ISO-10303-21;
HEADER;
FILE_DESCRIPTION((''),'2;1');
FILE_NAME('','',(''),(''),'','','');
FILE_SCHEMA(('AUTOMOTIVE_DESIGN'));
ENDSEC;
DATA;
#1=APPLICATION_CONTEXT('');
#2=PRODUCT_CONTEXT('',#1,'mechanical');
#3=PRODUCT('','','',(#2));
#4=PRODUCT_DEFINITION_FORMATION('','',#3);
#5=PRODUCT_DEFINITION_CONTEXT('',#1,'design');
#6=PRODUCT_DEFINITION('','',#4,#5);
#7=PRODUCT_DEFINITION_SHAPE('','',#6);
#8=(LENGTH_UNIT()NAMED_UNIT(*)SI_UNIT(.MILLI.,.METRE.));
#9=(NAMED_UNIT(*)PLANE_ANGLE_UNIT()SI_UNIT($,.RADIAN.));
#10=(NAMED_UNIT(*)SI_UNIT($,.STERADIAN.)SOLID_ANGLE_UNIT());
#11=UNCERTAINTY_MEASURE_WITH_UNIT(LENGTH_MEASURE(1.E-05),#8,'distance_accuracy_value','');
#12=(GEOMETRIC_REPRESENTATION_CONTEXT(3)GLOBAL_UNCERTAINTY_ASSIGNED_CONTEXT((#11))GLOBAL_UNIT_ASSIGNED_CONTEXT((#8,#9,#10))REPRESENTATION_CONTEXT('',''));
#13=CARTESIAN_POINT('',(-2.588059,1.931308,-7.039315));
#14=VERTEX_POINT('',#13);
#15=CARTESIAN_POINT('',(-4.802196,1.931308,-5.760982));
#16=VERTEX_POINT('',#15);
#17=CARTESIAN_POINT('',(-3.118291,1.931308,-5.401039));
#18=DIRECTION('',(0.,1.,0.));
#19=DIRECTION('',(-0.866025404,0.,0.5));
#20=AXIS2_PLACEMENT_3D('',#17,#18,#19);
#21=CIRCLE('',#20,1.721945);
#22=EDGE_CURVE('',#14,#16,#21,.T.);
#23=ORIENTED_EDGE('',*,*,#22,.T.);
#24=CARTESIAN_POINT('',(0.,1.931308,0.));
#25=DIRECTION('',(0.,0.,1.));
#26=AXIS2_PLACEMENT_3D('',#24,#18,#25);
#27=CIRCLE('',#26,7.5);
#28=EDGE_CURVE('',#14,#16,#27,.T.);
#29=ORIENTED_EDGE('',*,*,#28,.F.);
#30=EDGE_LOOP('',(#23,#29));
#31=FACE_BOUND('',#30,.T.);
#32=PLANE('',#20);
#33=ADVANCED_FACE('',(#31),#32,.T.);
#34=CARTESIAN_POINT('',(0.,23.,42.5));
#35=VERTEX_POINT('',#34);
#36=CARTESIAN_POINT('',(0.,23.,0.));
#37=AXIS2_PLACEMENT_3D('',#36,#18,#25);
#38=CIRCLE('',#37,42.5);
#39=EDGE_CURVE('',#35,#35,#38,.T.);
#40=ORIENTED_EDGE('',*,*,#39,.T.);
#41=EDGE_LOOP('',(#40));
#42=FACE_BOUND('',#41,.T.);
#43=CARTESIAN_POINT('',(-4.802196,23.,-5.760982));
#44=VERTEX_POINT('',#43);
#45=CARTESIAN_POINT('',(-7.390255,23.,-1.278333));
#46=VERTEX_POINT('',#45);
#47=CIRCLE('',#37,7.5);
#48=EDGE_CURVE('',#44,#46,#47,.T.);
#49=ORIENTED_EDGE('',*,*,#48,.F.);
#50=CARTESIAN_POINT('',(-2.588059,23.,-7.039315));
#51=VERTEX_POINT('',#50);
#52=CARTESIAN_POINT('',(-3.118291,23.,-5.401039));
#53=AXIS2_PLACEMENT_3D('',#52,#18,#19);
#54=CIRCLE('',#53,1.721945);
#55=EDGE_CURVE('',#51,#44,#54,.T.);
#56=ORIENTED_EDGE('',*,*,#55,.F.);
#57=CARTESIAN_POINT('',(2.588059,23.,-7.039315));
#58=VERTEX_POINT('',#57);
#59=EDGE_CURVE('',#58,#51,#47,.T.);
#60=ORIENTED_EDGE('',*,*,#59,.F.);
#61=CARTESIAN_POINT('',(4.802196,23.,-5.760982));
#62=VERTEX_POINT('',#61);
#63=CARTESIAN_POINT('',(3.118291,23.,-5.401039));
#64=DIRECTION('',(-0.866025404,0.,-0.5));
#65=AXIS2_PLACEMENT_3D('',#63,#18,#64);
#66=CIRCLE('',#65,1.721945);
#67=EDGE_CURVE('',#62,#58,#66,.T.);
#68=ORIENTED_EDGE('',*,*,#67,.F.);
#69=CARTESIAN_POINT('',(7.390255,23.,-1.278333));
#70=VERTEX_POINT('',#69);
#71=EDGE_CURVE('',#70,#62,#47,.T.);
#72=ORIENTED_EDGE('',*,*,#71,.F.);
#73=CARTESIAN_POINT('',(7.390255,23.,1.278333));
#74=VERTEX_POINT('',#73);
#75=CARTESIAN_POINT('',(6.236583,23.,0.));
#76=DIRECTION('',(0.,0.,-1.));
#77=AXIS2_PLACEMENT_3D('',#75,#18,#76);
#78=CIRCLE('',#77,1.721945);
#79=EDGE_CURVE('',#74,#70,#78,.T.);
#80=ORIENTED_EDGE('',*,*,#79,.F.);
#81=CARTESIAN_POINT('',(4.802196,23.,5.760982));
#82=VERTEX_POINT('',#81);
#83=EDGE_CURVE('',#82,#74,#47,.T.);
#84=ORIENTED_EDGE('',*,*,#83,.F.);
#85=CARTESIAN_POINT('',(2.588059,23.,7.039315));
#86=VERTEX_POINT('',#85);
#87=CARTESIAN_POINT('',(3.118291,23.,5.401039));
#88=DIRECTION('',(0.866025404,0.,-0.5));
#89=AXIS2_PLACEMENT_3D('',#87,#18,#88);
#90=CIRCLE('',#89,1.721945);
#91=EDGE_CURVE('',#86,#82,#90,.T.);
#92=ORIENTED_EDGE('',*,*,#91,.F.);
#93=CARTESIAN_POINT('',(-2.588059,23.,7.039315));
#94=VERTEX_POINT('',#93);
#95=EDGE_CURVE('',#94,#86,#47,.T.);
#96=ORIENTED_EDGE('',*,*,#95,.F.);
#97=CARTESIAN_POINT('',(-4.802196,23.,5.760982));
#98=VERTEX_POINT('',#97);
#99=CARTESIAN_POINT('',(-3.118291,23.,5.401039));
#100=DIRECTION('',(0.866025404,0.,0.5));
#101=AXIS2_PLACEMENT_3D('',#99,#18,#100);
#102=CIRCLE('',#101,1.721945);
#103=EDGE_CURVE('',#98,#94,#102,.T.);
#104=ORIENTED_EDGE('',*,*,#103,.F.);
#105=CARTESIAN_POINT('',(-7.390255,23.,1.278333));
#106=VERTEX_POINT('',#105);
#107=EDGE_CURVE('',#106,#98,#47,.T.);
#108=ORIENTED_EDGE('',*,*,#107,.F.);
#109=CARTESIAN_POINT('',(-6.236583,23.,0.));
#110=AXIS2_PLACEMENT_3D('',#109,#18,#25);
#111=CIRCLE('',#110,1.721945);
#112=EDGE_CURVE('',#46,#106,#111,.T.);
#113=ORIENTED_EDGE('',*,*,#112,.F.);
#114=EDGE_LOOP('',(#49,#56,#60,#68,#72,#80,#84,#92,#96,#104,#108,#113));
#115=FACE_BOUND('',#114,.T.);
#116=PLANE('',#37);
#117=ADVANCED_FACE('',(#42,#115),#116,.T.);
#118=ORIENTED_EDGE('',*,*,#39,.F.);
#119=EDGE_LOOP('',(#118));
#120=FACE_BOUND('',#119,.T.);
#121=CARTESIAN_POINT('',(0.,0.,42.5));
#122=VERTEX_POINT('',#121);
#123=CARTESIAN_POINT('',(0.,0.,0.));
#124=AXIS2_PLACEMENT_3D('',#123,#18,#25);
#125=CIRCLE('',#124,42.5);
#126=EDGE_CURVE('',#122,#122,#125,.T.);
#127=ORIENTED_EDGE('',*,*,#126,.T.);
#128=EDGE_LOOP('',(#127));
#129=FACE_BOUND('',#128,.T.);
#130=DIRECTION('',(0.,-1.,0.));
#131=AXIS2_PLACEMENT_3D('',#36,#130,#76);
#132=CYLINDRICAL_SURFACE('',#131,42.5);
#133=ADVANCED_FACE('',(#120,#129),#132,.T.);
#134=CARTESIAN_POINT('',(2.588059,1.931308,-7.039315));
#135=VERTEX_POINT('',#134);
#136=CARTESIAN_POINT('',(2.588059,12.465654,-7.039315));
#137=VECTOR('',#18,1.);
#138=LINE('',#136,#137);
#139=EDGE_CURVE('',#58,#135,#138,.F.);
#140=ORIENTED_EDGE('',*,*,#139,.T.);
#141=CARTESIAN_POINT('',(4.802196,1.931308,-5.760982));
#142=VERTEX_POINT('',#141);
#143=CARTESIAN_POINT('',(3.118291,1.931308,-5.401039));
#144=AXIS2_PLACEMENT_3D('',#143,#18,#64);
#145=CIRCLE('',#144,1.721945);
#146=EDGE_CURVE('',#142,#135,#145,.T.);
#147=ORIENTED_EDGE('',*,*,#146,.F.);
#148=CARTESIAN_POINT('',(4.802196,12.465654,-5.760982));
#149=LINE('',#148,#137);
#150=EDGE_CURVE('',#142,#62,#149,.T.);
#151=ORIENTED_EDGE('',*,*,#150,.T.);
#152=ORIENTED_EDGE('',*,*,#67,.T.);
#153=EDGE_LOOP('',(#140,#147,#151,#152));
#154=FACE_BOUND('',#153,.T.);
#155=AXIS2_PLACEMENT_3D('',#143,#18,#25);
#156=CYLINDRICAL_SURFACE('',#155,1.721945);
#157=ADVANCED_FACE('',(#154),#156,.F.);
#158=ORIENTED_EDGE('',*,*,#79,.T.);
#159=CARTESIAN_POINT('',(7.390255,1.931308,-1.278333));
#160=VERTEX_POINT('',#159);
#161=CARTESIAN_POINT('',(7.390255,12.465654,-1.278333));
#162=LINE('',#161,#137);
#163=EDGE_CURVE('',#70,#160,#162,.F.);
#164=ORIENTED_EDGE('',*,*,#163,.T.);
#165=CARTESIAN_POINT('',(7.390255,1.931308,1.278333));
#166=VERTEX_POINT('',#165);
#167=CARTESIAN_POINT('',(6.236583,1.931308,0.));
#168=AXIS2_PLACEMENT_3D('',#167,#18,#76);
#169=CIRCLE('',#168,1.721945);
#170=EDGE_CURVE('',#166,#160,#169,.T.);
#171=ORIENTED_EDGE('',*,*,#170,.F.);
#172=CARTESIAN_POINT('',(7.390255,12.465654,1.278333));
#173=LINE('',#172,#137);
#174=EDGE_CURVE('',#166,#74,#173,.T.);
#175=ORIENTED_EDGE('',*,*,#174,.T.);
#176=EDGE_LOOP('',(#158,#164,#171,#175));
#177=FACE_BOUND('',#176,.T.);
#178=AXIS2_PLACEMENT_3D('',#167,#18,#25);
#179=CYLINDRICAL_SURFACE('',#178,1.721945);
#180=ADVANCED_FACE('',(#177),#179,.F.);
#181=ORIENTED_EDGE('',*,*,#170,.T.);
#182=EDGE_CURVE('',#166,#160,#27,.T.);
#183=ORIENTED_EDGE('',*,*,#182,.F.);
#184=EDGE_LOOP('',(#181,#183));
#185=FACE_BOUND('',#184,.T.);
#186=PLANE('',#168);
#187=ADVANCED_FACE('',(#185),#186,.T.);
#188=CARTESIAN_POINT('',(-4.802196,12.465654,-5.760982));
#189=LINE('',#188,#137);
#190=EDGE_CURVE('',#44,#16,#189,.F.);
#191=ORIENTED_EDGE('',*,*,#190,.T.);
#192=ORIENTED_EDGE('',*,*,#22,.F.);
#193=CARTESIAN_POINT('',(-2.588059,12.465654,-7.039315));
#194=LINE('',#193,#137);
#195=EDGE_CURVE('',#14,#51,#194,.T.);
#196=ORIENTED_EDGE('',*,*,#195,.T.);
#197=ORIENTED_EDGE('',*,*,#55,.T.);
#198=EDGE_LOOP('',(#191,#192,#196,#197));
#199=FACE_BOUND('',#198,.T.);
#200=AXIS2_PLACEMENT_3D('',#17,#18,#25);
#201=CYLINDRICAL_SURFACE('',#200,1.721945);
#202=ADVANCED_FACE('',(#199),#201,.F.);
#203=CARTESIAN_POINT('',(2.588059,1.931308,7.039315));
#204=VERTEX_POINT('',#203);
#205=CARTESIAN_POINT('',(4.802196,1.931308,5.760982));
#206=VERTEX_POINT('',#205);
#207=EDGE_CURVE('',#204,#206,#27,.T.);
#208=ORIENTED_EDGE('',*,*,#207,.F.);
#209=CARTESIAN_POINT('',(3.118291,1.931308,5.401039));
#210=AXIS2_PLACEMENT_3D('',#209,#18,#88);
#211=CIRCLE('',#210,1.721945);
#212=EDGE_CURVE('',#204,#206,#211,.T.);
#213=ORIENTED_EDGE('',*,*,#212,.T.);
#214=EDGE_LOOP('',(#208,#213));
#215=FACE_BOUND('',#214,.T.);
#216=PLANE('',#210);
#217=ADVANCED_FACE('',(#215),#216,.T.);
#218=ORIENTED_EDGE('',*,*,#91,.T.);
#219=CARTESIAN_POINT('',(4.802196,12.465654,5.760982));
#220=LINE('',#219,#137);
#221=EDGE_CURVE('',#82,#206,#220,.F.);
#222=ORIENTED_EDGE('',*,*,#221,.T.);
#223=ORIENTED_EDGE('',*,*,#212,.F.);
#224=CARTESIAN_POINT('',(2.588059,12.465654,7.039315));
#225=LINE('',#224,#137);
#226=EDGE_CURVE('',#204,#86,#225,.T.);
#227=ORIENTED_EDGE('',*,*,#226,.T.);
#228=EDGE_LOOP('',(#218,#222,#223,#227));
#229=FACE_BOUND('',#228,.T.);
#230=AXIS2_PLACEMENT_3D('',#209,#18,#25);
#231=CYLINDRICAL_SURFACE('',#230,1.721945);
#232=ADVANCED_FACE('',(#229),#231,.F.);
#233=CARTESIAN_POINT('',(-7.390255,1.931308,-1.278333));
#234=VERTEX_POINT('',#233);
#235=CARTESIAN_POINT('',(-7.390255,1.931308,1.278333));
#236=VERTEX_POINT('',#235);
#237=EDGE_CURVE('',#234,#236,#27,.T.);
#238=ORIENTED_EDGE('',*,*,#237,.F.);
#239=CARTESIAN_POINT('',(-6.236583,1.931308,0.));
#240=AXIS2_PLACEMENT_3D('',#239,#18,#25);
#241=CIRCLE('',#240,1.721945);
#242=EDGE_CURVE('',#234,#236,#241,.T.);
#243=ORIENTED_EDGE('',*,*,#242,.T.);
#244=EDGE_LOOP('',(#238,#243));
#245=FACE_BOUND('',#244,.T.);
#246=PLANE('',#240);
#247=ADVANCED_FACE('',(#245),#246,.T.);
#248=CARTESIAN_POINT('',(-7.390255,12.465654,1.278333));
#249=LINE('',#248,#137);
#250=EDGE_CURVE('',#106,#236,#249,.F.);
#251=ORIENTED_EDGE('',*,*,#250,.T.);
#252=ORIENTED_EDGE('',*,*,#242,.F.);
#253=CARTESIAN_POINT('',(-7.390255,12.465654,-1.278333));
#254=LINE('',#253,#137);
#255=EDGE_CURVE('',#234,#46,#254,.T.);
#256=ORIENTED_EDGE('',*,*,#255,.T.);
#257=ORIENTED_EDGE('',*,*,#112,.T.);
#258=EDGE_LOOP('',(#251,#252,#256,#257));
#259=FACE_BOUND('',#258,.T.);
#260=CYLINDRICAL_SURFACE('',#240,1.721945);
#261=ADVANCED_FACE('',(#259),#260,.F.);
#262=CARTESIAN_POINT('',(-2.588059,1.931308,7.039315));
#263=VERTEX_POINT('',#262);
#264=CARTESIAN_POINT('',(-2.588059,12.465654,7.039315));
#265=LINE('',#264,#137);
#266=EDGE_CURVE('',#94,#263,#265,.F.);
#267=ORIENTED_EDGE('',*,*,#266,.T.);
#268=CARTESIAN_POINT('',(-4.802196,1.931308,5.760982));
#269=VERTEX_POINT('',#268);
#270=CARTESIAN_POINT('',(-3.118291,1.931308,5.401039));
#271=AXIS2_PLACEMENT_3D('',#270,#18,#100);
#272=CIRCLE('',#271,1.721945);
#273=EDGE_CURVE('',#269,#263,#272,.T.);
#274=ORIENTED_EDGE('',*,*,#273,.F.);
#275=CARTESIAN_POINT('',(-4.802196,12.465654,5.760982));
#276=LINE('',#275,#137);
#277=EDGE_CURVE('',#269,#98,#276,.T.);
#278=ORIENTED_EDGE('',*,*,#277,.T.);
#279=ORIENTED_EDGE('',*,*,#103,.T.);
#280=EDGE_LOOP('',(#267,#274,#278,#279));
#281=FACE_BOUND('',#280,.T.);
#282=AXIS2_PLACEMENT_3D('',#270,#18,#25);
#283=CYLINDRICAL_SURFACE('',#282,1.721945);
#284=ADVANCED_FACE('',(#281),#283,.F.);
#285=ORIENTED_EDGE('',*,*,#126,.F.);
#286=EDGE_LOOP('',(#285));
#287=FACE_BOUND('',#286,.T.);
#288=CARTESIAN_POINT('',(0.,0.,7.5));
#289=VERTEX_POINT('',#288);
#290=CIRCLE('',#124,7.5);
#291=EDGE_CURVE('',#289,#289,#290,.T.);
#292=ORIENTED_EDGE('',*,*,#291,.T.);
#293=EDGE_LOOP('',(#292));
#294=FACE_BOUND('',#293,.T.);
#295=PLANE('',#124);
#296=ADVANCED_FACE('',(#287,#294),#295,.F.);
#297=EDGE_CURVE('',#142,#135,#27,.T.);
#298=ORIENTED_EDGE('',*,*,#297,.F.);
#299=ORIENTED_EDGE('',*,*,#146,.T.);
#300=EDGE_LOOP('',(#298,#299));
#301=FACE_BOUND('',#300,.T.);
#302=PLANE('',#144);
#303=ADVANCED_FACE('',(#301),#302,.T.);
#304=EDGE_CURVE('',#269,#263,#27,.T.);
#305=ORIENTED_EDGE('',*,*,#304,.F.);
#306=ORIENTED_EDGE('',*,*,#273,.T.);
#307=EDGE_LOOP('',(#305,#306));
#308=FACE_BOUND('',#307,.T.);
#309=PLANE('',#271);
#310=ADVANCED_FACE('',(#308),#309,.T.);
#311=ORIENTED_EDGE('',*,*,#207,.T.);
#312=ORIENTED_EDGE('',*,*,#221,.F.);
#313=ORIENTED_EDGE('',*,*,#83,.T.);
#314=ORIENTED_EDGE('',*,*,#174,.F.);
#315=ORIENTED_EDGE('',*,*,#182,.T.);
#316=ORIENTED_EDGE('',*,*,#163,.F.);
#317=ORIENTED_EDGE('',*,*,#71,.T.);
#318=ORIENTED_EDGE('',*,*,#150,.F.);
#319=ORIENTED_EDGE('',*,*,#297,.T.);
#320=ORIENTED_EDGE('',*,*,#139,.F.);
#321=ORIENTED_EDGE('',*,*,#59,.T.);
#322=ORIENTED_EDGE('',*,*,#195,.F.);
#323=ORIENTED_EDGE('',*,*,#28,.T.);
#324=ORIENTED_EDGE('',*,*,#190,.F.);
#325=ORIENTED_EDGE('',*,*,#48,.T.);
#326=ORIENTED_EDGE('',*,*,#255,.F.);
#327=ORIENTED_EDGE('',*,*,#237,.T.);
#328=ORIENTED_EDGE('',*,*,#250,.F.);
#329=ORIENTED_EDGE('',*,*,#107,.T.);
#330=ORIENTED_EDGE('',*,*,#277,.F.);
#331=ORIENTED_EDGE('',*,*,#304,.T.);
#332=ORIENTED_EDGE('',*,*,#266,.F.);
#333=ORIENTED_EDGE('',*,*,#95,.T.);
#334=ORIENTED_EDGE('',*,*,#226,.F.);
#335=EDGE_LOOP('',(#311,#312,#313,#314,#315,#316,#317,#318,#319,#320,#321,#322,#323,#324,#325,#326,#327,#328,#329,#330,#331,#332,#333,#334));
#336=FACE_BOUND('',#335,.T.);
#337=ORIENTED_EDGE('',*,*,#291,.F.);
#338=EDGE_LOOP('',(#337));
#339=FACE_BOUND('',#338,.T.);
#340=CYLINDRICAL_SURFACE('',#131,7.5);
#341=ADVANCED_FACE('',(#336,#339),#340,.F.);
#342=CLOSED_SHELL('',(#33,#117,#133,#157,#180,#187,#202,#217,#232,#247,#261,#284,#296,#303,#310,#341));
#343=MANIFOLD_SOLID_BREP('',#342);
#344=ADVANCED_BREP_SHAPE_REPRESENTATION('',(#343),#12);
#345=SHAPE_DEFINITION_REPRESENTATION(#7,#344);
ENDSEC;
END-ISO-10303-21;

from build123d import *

# Parameters (mm, degrees)
SKETCH1_R           = 42.5
BOSS_EXTRUDE1_DEPTH = 23
SKETCH2_R           = 7.5
CUT_EXTRUDE1_DEPTH  = 65.354487023
SKETCH3_R           = 1.721944662
CUT_EXTRUDE2_DEPTH  = 21.06869199
CIRPATTERN1_COUNT   = 6


with BuildPart() as part:
    # Sketch1 → Boss-Extrude1 (new body)
    with BuildSketch(Plane(origin=(0, 0, 0), x_dir=(1, 0, 0), z_dir=(0, 1, 0))):
        Circle(SKETCH1_R)
    extrude(amount=BOSS_EXTRUDE1_DEPTH)

    # Sketch2 → Cut-Extrude1 (cut, through all)
    with BuildSketch(Plane(origin=(0, 0, 0), x_dir=(1, 0, 0), z_dir=(0, 1, 0))):
        Circle(SKETCH2_R)
    extrude(amount=CUT_EXTRUDE1_DEPTH, mode=Mode.SUBTRACT)

    # Sketch3 → Cut-Extrude2 (cut)
    with BuildSketch(Plane(origin=(0, 23, 0), x_dir=(1, 0, 0), z_dir=(0, 1, 0))):
        with Locations((-6.236582965, 0)):
            Circle(SKETCH3_R)
    cut_extrude2 = extrude(amount=-CUT_EXTRUDE2_DEPTH, mode=Mode.SUBTRACT)

    # CirPattern1: Cut-Extrude2 ×6 about axis
    cirpattern1_axis = Axis((0, 0, 0), (0, 1, 0))
    for i in range(1, CIRPATTERN1_COUNT):
        add(cut_extrude2.rotate(cirpattern1_axis, i * 360 / CIRPATTERN1_COUNT), mode=Mode.SUBTRACT)


solid = part.part
